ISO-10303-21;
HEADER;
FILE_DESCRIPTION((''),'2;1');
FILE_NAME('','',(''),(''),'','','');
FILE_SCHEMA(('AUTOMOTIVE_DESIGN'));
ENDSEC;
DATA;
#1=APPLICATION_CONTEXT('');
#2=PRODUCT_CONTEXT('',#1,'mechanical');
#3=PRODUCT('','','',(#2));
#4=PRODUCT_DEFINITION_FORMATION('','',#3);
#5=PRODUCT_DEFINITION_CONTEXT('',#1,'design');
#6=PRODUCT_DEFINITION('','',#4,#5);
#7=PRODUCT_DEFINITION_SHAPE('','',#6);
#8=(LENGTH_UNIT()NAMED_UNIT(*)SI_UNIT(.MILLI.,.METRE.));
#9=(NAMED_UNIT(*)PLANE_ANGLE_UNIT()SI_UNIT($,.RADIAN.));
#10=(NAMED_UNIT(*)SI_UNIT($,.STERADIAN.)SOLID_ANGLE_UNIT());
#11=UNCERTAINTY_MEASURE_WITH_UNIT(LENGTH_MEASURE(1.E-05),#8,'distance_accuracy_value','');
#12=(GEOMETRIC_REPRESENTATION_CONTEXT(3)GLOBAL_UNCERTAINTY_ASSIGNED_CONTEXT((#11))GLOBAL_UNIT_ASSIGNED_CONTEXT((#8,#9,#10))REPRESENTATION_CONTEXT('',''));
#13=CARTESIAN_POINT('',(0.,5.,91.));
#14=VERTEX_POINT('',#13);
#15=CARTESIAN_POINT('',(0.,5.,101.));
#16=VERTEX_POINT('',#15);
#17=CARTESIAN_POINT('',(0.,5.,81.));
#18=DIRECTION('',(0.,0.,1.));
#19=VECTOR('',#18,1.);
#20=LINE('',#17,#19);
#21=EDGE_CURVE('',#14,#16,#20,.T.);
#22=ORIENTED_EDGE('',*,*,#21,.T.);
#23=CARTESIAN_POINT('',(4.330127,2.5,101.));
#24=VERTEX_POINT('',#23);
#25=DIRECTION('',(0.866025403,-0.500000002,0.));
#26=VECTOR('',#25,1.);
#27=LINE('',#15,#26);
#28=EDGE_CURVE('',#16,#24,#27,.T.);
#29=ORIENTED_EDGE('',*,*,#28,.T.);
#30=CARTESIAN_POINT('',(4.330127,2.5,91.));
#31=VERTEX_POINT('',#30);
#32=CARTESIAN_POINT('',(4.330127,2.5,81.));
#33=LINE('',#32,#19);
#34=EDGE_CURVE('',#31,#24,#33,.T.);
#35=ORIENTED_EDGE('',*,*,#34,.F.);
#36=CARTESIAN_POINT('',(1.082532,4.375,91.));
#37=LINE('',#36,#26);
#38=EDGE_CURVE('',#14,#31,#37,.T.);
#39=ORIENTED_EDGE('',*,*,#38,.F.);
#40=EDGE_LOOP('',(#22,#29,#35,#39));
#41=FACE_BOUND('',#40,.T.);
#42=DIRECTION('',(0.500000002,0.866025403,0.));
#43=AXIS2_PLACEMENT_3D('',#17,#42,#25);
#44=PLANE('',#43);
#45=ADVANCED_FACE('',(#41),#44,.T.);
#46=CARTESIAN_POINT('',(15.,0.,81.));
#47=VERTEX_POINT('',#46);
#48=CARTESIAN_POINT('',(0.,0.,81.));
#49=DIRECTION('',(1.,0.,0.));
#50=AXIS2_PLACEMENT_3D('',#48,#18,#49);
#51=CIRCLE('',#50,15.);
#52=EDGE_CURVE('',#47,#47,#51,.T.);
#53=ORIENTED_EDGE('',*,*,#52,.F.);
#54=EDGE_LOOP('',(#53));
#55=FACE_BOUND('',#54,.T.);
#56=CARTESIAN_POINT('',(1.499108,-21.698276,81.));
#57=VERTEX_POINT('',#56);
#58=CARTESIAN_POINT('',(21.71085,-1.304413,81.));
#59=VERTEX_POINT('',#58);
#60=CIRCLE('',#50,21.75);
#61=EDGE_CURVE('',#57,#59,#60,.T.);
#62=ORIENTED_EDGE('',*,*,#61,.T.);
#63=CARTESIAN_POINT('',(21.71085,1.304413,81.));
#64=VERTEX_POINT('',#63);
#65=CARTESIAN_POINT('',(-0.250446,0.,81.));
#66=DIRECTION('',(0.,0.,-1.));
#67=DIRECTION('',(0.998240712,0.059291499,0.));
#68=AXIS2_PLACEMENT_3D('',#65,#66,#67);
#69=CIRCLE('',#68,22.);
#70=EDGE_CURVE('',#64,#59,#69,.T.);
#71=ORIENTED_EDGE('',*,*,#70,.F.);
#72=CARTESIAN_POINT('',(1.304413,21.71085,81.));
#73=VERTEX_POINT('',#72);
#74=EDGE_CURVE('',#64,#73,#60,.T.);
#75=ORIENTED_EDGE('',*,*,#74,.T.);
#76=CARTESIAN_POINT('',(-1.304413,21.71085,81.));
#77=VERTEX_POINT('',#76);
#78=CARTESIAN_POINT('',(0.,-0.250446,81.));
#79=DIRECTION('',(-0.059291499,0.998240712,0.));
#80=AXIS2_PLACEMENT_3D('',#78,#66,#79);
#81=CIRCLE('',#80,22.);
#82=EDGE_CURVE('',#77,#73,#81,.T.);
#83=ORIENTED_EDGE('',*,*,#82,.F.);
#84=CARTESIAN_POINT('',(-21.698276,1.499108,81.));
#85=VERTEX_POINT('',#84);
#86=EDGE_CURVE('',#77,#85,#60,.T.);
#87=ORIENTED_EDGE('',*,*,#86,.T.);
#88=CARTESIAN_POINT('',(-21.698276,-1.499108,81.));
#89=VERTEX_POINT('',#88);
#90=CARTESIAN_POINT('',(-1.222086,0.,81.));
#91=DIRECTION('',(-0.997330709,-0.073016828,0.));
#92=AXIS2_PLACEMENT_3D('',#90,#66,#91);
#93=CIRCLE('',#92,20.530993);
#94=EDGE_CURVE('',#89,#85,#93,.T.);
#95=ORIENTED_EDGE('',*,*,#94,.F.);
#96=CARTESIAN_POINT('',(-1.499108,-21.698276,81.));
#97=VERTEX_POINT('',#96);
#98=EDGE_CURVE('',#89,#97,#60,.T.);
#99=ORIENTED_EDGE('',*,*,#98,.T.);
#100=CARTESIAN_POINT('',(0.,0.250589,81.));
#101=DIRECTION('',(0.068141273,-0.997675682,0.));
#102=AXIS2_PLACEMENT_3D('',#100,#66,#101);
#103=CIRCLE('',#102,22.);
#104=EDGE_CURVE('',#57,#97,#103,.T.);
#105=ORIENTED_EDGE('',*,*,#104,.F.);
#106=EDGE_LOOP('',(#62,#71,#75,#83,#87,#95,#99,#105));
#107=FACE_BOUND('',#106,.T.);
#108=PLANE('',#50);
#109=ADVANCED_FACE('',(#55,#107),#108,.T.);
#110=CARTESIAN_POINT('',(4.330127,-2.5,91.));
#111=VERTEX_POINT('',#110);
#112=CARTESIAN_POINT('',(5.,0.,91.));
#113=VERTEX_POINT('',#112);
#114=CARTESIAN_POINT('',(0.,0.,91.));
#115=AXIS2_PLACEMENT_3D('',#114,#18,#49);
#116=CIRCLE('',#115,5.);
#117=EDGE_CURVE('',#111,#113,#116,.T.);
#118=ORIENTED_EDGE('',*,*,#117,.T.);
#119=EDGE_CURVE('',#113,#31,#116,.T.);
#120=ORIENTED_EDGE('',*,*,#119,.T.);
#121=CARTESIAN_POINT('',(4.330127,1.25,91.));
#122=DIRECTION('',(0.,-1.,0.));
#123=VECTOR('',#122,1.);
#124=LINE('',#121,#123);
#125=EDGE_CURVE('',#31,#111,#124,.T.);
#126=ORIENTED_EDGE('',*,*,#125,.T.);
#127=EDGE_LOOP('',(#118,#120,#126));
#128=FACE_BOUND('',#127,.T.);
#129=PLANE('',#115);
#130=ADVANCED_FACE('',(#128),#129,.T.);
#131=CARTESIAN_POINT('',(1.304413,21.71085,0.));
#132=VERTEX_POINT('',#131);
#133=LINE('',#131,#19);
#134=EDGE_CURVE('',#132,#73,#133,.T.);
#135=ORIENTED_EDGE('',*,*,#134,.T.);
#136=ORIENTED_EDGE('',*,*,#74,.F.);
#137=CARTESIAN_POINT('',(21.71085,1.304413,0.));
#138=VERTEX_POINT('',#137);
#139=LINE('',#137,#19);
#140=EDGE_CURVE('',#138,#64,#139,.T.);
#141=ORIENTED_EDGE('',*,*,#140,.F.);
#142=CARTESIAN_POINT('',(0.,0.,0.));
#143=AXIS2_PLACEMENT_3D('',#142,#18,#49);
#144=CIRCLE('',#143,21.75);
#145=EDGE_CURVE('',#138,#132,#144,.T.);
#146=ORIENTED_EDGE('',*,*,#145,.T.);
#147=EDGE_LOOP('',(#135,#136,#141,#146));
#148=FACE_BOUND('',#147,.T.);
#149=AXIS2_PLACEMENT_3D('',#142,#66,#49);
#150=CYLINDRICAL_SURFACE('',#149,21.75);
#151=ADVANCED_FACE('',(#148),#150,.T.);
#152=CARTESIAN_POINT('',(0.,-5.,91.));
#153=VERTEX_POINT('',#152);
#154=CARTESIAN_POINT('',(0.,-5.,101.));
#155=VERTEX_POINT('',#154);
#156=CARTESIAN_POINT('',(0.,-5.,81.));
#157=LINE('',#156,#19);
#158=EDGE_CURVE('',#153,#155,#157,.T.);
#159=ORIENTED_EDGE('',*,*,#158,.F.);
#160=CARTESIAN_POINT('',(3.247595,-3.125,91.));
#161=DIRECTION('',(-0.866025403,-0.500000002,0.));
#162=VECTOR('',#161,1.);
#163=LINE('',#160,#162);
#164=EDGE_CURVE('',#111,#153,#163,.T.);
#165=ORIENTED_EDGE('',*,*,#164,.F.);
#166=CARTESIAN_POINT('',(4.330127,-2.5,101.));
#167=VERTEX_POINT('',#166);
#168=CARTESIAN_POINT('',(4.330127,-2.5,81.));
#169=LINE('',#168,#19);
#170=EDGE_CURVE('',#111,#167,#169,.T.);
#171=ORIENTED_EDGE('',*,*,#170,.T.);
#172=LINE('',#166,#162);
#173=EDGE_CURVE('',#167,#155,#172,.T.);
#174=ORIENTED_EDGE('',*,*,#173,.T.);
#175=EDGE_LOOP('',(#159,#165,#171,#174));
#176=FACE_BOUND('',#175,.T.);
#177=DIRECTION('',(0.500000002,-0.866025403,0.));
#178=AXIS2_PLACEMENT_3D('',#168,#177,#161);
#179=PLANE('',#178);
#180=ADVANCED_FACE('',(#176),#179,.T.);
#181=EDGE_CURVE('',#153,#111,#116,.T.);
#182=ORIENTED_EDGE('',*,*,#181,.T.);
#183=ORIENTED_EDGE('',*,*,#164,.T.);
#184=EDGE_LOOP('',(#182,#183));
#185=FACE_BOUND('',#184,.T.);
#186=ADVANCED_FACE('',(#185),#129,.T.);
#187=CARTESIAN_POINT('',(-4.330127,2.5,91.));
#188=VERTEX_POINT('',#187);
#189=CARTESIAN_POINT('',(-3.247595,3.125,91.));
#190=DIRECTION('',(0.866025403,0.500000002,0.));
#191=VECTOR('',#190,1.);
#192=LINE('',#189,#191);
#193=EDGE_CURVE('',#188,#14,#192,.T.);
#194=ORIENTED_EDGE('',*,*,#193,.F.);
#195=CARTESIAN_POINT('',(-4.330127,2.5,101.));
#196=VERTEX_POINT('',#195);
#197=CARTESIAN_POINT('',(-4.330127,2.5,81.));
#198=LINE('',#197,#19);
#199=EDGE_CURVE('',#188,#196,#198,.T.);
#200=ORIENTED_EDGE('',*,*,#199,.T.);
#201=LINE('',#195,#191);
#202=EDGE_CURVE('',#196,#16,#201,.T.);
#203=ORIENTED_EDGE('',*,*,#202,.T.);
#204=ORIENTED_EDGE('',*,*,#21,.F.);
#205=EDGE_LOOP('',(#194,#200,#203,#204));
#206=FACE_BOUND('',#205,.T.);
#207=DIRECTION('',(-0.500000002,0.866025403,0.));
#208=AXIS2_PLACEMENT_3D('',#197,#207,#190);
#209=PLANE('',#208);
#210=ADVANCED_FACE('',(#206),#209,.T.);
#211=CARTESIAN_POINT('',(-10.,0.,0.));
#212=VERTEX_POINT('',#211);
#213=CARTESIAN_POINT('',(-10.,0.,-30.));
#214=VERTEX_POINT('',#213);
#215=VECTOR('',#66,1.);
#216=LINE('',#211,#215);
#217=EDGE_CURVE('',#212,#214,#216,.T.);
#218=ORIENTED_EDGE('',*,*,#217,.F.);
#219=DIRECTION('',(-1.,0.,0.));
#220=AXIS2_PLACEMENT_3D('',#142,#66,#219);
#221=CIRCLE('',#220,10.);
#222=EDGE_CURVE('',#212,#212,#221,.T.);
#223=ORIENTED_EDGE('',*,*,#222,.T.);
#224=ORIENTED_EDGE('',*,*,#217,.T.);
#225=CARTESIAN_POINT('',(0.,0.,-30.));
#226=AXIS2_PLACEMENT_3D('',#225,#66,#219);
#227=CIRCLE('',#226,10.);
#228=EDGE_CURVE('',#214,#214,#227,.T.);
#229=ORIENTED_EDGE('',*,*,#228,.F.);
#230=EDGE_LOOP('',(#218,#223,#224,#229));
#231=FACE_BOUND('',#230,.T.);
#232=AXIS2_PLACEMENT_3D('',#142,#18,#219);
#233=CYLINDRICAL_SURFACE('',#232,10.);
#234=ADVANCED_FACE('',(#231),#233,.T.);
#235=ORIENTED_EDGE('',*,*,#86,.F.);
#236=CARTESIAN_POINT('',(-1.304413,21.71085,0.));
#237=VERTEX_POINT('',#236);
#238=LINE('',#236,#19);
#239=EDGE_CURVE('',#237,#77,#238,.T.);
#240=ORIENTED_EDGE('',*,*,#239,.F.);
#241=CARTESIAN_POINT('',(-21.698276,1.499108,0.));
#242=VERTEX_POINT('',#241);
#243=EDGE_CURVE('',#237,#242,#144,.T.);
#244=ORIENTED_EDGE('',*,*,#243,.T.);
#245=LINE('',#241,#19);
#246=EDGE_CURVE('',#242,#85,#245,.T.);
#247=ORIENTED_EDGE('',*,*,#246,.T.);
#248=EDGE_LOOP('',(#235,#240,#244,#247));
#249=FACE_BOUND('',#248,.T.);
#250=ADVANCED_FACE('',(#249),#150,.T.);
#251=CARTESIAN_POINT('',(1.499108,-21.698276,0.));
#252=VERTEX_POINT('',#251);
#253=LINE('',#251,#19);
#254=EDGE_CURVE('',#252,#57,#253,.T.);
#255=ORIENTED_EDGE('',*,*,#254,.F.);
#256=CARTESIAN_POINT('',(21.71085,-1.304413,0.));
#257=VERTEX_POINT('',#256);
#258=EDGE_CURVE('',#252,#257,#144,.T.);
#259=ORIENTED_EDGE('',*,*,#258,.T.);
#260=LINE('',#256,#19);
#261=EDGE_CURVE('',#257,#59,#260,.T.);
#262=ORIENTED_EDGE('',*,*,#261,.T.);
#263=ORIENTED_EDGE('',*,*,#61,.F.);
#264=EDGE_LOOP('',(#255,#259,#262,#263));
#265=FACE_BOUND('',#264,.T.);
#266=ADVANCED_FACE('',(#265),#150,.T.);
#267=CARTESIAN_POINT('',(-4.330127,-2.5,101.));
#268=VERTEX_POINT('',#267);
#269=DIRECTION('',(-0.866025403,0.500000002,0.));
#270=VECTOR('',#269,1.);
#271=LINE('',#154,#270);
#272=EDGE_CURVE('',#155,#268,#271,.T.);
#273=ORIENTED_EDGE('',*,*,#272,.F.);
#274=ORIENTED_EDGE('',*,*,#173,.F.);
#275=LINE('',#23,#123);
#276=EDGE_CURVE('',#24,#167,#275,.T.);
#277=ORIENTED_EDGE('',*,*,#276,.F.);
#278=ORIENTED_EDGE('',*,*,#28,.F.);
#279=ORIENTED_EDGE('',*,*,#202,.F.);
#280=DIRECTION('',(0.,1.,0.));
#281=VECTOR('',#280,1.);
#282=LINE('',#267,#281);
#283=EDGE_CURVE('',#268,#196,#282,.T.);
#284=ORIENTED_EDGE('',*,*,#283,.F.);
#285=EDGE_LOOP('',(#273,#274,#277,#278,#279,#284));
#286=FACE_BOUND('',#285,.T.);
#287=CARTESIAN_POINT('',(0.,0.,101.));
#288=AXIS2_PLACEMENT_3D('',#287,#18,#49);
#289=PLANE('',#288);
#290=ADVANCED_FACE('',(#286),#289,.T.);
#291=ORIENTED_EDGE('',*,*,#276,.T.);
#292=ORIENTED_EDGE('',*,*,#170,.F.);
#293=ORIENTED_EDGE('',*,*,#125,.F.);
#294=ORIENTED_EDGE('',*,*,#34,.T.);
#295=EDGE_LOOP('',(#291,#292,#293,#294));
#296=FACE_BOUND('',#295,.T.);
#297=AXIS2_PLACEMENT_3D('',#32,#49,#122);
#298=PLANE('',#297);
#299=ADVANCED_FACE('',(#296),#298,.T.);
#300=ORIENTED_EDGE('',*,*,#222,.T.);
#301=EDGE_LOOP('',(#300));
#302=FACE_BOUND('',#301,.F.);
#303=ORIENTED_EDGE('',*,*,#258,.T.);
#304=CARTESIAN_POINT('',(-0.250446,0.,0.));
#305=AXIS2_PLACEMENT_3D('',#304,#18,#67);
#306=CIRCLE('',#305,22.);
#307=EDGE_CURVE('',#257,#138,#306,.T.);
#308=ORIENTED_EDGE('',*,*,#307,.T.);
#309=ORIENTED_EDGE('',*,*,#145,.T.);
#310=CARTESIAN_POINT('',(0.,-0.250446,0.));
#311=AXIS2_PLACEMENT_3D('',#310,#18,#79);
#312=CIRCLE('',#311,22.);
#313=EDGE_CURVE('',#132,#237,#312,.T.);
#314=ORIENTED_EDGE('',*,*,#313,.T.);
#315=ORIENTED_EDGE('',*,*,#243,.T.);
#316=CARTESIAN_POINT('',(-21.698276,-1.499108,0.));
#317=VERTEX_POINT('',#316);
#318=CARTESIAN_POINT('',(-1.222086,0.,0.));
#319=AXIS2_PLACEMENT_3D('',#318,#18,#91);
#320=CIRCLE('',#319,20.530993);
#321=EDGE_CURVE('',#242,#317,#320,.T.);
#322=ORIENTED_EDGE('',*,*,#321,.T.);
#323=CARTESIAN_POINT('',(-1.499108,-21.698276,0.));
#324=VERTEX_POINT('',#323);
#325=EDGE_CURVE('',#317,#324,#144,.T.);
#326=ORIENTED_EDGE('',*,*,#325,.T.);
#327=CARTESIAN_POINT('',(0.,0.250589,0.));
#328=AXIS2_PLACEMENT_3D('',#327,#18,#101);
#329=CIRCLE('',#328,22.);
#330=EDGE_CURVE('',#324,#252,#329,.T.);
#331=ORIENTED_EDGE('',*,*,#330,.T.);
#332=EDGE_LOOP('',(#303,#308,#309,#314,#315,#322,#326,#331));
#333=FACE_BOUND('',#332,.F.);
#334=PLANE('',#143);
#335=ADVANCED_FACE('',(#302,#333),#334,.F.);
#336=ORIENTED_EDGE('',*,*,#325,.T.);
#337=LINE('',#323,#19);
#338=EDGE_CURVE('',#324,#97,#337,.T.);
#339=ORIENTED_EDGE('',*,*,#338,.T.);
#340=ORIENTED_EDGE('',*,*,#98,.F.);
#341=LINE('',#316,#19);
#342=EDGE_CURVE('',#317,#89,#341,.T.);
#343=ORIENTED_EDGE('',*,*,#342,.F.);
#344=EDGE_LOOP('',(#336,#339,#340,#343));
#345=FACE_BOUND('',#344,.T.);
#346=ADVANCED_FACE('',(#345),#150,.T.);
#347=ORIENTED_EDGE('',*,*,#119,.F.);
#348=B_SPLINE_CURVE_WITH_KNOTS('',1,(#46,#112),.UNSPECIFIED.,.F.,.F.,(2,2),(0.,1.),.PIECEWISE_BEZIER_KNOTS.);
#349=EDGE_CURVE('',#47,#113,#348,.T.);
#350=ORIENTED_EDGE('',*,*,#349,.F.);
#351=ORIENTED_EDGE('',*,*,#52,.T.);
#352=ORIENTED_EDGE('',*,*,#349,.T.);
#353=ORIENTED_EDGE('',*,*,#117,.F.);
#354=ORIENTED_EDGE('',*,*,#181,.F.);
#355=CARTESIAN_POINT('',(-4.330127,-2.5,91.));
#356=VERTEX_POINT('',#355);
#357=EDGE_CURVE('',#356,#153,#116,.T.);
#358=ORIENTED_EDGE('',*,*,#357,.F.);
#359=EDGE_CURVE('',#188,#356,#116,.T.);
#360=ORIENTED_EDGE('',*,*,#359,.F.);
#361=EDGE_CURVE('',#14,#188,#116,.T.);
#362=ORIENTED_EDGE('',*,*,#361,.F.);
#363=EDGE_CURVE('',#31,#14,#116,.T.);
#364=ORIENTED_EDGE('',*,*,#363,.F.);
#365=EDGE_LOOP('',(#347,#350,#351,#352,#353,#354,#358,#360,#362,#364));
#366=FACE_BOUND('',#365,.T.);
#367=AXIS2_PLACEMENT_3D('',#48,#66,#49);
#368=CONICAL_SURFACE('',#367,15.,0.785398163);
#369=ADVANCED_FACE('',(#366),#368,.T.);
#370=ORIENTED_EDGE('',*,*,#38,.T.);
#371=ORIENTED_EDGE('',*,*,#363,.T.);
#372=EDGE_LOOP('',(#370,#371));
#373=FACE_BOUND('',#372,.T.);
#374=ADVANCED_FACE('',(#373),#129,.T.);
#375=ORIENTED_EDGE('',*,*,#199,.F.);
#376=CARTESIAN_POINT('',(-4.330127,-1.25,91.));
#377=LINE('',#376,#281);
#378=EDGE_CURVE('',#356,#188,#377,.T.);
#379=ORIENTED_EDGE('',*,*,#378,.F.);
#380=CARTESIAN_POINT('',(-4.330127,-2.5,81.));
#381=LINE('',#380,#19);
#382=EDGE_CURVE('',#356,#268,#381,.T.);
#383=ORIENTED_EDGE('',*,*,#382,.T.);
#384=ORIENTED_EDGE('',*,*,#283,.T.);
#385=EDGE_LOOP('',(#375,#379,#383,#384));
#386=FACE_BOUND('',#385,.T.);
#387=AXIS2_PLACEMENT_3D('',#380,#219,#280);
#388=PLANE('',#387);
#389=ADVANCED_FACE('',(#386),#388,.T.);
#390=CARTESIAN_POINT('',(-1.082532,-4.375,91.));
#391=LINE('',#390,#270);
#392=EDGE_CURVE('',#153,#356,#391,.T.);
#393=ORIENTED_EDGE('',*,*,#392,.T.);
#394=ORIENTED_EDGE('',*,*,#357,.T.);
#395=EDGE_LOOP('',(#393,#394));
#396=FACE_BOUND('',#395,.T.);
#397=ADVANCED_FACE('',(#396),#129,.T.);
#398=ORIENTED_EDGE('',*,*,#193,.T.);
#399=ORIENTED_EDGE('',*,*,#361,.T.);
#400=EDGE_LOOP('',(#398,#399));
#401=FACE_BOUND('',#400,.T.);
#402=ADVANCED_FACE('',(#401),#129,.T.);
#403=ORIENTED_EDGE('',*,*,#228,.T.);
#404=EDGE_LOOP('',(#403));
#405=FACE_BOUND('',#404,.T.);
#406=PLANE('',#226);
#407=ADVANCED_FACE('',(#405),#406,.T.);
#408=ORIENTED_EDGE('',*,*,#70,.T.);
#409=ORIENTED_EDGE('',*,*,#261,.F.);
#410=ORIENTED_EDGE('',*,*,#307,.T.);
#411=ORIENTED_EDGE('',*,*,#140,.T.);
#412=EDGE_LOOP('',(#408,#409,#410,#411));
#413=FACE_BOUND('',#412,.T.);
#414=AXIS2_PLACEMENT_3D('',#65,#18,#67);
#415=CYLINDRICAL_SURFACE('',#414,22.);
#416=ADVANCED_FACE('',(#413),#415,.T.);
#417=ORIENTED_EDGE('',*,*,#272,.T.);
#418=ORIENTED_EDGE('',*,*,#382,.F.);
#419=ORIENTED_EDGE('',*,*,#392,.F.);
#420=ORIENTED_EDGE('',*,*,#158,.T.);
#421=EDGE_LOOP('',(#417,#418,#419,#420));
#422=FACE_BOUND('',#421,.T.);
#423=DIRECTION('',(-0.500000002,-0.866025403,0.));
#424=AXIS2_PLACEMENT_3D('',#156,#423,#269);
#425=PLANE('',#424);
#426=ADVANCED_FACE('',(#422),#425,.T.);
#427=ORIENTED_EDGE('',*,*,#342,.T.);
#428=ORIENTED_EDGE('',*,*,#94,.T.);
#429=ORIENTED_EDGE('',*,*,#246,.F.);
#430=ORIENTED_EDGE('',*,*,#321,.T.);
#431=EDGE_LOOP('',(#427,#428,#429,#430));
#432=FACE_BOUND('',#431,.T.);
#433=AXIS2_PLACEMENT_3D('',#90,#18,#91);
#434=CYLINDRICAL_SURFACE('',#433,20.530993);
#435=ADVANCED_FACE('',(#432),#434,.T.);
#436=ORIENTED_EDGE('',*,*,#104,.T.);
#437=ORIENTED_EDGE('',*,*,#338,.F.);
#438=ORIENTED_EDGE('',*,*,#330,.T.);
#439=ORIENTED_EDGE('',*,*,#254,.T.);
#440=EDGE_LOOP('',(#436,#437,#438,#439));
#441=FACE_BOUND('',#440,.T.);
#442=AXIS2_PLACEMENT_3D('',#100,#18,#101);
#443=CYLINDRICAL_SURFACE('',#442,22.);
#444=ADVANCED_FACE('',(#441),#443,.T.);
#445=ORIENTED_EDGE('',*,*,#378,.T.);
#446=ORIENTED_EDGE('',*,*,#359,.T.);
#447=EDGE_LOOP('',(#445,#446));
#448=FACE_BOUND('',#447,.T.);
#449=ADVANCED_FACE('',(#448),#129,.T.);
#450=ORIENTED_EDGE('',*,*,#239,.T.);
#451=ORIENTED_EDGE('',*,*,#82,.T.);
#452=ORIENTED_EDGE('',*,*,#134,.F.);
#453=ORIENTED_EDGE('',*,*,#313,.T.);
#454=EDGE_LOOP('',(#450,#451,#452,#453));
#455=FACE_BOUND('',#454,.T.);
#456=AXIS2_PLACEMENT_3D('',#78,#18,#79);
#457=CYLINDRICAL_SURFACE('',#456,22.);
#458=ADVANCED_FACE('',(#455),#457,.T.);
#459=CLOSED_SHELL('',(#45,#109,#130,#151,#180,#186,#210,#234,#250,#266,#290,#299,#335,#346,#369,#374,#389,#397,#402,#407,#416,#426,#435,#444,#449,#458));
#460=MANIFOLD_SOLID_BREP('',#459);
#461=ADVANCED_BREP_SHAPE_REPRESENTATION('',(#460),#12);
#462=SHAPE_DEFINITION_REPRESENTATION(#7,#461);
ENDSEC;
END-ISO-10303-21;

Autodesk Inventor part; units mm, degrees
ref_plane "YZ Plane" through (0, 0, 0) normal (1, 0, 0) x (0, 1, 0)
ref_plane "XZ Plane" through (0, 0, 0) normal (0, 1, 0) x (-1, 0, 0)
ref_plane "XY Plane" through (0, 0, 0) normal (0, 0, 1) x (1, 0, 0)
sketch "Boceto1" plane through (0, 0, 0) normal (0, 0, 1) x (1, 0, 0)
  circle A0 centre (0, 0) radius 21.75
  arc A1 (1.304413, 21.71085) -> (0, 23.055) centre (0, 21.75) ccw
  arc A2 (0, 23.055) -> (-1.304413, 21.71085) centre (0, 21.75) ccw
  line L0 (0, -21.75) -> (0, -23.25)
  arc A3 (0, -23.25) -> (1.499108, -21.698276) centre (0, -21.75) ccw
  arc A4 (-1.499108, -21.698276) -> (0, -23.25) centre (0, -21.75) ccw
  line L1 (21.75, 0) -> (23.055, 0)
  line L2 (-21.75, 0) -> (-23.25, 0)
  arc A5 (-21.698276, 1.499108) -> (-21.698276, -1.499108) centre (-21.75, 0) ccw
  arc A6 (21.71085, -1.304413) -> (21.71085, 1.304413) centre (21.75, 0) ccw
  dimension "d0" = 43.5
  dimension "d2" = 1.5
  dimension "d4" = 1.5
extrude "Extrusión1" add sketch "Boceto1" along normal blind 81
sketch "Boceto2" plane through (0, 0, 81) normal (0, 0, 1) x (1, 0, 0)
  line L0 (0, 5) -> (4.330127, 2.5)
  line L1 (4.330127, 2.5) -> (4.330127, -2.5)
  line L2 (4.330127, -2.5) -> (0, -5)
  line L3 (0, -5) -> (-4.330127, -2.5)
  line L4 (-4.330127, -2.5) -> (-4.330127, 2.5)
  line L5 (-4.330127, 2.5) -> (0, 5)
  point P0 (0, 0)
  point P1 (0, 0)
extrude "Extrusión2" add sketch "Boceto2" along normal blind 20
sketch "Boceto10" plane through (0, 0, 0) normal (0, 0, -1) x (-1, 0, 0)
  circle A0 centre (0, 0) radius 7.5
  dimension "d37" = 15
extrude "Extrusión9" add sketch "Boceto10" along normal blind 30
sketch "Boceto12" plane through (0, 0, 0) normal (0, 0, -1) x (-1, 0, 0)
  circle A0 centre (0, 0) radius 10
  dimension "d40" = 20
extrude "Extrusión10" add sketch "Boceto12" along normal blind 30
sketch "Boceto20" plane through (0, 0, 81) normal (0, 0, 1) x (1, 0, 0)
  circle A0 centre (0, 0) radius 15
  dimension "d61" = 30
ref_plane "Plano de trabajo1" through (0, 0, 91) normal (0, 0, 1) x (1, 0, 0)
sketch "Boceto21" plane through (0, 0, 91) normal (0, 0, 1) x (1, 0, 0)
  line L0 (4.330127, 2.5) -> (4.330127, -2.5)
  circle A0 centre (0, 0) radius 5
sketch "Boceto20 outline for Solevación1" plane through (0, 0, 81) normal (0, 0, 1) x (1, 0, 0)
  circle A0 centre (0, 0) radius 15
sketch "Boceto21 outline for Solevación1" plane through (0, 0, 91) normal (0, 0, 1) x (1, 0, 0)
  circle A0 centre (0, 0) radius 5
loft "Solevación1" add profiles "Boceto20 outline for Solevación1", "Boceto21 outline for Solevación1"
sketch "Boceto22" plane through (0, 0, 81) normal (0, 0, 1) x (1, 0, 0)
  arc A0 (1.304413, 21.71085) -> (-1.304413, 21.71085) centre (0, 21.75) ccw
  arc A1 (1.304413, 21.71085) -> (-1.304413, 21.71085) centre (0, 21.749554) ccw
  arc A2 (21.71085, -1.304413) -> (21.71085, 1.304413) centre (21.75, 0) ccw
  arc A3 (21.71085, -1.304413) -> (21.71085, 1.304413) centre (21.749554, 0) ccw
  arc A4 (-1.499108, -21.698276) -> (1.499108, -21.698276) centre (0, -21.75) ccw
  arc A5 (-1.499108, -21.698276) -> (1.499108, -21.698276) centre (0, -21.749411) ccw
  arc A6 (-21.698276, 1.499108) -> (-21.698276, -1.499108) centre (-21.75, 0) ccw
  arc A7 (-21.685394, 1.49099) -> (-21.698276, -1.499108) centre (-21.753079, -0.003795) ccw
  arc A8 (-21.698276, 1.499108) -> (-21.698276, -1.499108) centre (-1.222086, 0) ccw
  arc A9 (1.304413, 21.71085) -> (-1.304413, 21.71085) centre (0, -0.250446) ccw
  arc A10 (21.71085, -1.304413) -> (21.71085, 1.304413) centre (-0.250446, 0) ccw
  arc A11 (-1.499108, -21.698276) -> (1.499108, -21.698276) centre (0, 0.250589) ccw
  point P0 (0, 0)
sketch "Boceto22 outline for Extrusión16" plane through (0, 0, 81) normal (0, 0, 1) x (1, 0, 0)
  arc A0 (-1.304413, 21.71085) -> (1.304413, 21.71085) centre (0, -0.250446) cw
  arc A1 (1.304413, 21.71085) -> (-1.304413, 21.71085) centre (0, 21.75) ccw
  arc A2 (21.71085, 1.304413) -> (21.71085, -1.304413) centre (-0.250446, 0) cw
  arc A3 (21.71085, -1.304413) -> (21.71085, 1.304413) centre (21.75, 0) ccw
  arc A4 (-21.698276, -1.499108) -> (-21.698276, 1.499108) centre (-1.222086, 0) cw
  arc A5 (-21.698276, 1.499108) -> (-21.698276, -1.499108) centre (-21.75, 0) ccw
  arc A6 (1.499108, -21.698276) -> (-1.499108, -21.698276) centre (0, 0.250589) cw
  arc A7 (-1.499108, -21.698276) -> (1.499108, -21.698276) centre (0, -21.75) ccw
extrude "Extrusión16" cut sketch "Boceto22 outline for Extrusión16" against normal blind 211
properties part number "eix bobina"
